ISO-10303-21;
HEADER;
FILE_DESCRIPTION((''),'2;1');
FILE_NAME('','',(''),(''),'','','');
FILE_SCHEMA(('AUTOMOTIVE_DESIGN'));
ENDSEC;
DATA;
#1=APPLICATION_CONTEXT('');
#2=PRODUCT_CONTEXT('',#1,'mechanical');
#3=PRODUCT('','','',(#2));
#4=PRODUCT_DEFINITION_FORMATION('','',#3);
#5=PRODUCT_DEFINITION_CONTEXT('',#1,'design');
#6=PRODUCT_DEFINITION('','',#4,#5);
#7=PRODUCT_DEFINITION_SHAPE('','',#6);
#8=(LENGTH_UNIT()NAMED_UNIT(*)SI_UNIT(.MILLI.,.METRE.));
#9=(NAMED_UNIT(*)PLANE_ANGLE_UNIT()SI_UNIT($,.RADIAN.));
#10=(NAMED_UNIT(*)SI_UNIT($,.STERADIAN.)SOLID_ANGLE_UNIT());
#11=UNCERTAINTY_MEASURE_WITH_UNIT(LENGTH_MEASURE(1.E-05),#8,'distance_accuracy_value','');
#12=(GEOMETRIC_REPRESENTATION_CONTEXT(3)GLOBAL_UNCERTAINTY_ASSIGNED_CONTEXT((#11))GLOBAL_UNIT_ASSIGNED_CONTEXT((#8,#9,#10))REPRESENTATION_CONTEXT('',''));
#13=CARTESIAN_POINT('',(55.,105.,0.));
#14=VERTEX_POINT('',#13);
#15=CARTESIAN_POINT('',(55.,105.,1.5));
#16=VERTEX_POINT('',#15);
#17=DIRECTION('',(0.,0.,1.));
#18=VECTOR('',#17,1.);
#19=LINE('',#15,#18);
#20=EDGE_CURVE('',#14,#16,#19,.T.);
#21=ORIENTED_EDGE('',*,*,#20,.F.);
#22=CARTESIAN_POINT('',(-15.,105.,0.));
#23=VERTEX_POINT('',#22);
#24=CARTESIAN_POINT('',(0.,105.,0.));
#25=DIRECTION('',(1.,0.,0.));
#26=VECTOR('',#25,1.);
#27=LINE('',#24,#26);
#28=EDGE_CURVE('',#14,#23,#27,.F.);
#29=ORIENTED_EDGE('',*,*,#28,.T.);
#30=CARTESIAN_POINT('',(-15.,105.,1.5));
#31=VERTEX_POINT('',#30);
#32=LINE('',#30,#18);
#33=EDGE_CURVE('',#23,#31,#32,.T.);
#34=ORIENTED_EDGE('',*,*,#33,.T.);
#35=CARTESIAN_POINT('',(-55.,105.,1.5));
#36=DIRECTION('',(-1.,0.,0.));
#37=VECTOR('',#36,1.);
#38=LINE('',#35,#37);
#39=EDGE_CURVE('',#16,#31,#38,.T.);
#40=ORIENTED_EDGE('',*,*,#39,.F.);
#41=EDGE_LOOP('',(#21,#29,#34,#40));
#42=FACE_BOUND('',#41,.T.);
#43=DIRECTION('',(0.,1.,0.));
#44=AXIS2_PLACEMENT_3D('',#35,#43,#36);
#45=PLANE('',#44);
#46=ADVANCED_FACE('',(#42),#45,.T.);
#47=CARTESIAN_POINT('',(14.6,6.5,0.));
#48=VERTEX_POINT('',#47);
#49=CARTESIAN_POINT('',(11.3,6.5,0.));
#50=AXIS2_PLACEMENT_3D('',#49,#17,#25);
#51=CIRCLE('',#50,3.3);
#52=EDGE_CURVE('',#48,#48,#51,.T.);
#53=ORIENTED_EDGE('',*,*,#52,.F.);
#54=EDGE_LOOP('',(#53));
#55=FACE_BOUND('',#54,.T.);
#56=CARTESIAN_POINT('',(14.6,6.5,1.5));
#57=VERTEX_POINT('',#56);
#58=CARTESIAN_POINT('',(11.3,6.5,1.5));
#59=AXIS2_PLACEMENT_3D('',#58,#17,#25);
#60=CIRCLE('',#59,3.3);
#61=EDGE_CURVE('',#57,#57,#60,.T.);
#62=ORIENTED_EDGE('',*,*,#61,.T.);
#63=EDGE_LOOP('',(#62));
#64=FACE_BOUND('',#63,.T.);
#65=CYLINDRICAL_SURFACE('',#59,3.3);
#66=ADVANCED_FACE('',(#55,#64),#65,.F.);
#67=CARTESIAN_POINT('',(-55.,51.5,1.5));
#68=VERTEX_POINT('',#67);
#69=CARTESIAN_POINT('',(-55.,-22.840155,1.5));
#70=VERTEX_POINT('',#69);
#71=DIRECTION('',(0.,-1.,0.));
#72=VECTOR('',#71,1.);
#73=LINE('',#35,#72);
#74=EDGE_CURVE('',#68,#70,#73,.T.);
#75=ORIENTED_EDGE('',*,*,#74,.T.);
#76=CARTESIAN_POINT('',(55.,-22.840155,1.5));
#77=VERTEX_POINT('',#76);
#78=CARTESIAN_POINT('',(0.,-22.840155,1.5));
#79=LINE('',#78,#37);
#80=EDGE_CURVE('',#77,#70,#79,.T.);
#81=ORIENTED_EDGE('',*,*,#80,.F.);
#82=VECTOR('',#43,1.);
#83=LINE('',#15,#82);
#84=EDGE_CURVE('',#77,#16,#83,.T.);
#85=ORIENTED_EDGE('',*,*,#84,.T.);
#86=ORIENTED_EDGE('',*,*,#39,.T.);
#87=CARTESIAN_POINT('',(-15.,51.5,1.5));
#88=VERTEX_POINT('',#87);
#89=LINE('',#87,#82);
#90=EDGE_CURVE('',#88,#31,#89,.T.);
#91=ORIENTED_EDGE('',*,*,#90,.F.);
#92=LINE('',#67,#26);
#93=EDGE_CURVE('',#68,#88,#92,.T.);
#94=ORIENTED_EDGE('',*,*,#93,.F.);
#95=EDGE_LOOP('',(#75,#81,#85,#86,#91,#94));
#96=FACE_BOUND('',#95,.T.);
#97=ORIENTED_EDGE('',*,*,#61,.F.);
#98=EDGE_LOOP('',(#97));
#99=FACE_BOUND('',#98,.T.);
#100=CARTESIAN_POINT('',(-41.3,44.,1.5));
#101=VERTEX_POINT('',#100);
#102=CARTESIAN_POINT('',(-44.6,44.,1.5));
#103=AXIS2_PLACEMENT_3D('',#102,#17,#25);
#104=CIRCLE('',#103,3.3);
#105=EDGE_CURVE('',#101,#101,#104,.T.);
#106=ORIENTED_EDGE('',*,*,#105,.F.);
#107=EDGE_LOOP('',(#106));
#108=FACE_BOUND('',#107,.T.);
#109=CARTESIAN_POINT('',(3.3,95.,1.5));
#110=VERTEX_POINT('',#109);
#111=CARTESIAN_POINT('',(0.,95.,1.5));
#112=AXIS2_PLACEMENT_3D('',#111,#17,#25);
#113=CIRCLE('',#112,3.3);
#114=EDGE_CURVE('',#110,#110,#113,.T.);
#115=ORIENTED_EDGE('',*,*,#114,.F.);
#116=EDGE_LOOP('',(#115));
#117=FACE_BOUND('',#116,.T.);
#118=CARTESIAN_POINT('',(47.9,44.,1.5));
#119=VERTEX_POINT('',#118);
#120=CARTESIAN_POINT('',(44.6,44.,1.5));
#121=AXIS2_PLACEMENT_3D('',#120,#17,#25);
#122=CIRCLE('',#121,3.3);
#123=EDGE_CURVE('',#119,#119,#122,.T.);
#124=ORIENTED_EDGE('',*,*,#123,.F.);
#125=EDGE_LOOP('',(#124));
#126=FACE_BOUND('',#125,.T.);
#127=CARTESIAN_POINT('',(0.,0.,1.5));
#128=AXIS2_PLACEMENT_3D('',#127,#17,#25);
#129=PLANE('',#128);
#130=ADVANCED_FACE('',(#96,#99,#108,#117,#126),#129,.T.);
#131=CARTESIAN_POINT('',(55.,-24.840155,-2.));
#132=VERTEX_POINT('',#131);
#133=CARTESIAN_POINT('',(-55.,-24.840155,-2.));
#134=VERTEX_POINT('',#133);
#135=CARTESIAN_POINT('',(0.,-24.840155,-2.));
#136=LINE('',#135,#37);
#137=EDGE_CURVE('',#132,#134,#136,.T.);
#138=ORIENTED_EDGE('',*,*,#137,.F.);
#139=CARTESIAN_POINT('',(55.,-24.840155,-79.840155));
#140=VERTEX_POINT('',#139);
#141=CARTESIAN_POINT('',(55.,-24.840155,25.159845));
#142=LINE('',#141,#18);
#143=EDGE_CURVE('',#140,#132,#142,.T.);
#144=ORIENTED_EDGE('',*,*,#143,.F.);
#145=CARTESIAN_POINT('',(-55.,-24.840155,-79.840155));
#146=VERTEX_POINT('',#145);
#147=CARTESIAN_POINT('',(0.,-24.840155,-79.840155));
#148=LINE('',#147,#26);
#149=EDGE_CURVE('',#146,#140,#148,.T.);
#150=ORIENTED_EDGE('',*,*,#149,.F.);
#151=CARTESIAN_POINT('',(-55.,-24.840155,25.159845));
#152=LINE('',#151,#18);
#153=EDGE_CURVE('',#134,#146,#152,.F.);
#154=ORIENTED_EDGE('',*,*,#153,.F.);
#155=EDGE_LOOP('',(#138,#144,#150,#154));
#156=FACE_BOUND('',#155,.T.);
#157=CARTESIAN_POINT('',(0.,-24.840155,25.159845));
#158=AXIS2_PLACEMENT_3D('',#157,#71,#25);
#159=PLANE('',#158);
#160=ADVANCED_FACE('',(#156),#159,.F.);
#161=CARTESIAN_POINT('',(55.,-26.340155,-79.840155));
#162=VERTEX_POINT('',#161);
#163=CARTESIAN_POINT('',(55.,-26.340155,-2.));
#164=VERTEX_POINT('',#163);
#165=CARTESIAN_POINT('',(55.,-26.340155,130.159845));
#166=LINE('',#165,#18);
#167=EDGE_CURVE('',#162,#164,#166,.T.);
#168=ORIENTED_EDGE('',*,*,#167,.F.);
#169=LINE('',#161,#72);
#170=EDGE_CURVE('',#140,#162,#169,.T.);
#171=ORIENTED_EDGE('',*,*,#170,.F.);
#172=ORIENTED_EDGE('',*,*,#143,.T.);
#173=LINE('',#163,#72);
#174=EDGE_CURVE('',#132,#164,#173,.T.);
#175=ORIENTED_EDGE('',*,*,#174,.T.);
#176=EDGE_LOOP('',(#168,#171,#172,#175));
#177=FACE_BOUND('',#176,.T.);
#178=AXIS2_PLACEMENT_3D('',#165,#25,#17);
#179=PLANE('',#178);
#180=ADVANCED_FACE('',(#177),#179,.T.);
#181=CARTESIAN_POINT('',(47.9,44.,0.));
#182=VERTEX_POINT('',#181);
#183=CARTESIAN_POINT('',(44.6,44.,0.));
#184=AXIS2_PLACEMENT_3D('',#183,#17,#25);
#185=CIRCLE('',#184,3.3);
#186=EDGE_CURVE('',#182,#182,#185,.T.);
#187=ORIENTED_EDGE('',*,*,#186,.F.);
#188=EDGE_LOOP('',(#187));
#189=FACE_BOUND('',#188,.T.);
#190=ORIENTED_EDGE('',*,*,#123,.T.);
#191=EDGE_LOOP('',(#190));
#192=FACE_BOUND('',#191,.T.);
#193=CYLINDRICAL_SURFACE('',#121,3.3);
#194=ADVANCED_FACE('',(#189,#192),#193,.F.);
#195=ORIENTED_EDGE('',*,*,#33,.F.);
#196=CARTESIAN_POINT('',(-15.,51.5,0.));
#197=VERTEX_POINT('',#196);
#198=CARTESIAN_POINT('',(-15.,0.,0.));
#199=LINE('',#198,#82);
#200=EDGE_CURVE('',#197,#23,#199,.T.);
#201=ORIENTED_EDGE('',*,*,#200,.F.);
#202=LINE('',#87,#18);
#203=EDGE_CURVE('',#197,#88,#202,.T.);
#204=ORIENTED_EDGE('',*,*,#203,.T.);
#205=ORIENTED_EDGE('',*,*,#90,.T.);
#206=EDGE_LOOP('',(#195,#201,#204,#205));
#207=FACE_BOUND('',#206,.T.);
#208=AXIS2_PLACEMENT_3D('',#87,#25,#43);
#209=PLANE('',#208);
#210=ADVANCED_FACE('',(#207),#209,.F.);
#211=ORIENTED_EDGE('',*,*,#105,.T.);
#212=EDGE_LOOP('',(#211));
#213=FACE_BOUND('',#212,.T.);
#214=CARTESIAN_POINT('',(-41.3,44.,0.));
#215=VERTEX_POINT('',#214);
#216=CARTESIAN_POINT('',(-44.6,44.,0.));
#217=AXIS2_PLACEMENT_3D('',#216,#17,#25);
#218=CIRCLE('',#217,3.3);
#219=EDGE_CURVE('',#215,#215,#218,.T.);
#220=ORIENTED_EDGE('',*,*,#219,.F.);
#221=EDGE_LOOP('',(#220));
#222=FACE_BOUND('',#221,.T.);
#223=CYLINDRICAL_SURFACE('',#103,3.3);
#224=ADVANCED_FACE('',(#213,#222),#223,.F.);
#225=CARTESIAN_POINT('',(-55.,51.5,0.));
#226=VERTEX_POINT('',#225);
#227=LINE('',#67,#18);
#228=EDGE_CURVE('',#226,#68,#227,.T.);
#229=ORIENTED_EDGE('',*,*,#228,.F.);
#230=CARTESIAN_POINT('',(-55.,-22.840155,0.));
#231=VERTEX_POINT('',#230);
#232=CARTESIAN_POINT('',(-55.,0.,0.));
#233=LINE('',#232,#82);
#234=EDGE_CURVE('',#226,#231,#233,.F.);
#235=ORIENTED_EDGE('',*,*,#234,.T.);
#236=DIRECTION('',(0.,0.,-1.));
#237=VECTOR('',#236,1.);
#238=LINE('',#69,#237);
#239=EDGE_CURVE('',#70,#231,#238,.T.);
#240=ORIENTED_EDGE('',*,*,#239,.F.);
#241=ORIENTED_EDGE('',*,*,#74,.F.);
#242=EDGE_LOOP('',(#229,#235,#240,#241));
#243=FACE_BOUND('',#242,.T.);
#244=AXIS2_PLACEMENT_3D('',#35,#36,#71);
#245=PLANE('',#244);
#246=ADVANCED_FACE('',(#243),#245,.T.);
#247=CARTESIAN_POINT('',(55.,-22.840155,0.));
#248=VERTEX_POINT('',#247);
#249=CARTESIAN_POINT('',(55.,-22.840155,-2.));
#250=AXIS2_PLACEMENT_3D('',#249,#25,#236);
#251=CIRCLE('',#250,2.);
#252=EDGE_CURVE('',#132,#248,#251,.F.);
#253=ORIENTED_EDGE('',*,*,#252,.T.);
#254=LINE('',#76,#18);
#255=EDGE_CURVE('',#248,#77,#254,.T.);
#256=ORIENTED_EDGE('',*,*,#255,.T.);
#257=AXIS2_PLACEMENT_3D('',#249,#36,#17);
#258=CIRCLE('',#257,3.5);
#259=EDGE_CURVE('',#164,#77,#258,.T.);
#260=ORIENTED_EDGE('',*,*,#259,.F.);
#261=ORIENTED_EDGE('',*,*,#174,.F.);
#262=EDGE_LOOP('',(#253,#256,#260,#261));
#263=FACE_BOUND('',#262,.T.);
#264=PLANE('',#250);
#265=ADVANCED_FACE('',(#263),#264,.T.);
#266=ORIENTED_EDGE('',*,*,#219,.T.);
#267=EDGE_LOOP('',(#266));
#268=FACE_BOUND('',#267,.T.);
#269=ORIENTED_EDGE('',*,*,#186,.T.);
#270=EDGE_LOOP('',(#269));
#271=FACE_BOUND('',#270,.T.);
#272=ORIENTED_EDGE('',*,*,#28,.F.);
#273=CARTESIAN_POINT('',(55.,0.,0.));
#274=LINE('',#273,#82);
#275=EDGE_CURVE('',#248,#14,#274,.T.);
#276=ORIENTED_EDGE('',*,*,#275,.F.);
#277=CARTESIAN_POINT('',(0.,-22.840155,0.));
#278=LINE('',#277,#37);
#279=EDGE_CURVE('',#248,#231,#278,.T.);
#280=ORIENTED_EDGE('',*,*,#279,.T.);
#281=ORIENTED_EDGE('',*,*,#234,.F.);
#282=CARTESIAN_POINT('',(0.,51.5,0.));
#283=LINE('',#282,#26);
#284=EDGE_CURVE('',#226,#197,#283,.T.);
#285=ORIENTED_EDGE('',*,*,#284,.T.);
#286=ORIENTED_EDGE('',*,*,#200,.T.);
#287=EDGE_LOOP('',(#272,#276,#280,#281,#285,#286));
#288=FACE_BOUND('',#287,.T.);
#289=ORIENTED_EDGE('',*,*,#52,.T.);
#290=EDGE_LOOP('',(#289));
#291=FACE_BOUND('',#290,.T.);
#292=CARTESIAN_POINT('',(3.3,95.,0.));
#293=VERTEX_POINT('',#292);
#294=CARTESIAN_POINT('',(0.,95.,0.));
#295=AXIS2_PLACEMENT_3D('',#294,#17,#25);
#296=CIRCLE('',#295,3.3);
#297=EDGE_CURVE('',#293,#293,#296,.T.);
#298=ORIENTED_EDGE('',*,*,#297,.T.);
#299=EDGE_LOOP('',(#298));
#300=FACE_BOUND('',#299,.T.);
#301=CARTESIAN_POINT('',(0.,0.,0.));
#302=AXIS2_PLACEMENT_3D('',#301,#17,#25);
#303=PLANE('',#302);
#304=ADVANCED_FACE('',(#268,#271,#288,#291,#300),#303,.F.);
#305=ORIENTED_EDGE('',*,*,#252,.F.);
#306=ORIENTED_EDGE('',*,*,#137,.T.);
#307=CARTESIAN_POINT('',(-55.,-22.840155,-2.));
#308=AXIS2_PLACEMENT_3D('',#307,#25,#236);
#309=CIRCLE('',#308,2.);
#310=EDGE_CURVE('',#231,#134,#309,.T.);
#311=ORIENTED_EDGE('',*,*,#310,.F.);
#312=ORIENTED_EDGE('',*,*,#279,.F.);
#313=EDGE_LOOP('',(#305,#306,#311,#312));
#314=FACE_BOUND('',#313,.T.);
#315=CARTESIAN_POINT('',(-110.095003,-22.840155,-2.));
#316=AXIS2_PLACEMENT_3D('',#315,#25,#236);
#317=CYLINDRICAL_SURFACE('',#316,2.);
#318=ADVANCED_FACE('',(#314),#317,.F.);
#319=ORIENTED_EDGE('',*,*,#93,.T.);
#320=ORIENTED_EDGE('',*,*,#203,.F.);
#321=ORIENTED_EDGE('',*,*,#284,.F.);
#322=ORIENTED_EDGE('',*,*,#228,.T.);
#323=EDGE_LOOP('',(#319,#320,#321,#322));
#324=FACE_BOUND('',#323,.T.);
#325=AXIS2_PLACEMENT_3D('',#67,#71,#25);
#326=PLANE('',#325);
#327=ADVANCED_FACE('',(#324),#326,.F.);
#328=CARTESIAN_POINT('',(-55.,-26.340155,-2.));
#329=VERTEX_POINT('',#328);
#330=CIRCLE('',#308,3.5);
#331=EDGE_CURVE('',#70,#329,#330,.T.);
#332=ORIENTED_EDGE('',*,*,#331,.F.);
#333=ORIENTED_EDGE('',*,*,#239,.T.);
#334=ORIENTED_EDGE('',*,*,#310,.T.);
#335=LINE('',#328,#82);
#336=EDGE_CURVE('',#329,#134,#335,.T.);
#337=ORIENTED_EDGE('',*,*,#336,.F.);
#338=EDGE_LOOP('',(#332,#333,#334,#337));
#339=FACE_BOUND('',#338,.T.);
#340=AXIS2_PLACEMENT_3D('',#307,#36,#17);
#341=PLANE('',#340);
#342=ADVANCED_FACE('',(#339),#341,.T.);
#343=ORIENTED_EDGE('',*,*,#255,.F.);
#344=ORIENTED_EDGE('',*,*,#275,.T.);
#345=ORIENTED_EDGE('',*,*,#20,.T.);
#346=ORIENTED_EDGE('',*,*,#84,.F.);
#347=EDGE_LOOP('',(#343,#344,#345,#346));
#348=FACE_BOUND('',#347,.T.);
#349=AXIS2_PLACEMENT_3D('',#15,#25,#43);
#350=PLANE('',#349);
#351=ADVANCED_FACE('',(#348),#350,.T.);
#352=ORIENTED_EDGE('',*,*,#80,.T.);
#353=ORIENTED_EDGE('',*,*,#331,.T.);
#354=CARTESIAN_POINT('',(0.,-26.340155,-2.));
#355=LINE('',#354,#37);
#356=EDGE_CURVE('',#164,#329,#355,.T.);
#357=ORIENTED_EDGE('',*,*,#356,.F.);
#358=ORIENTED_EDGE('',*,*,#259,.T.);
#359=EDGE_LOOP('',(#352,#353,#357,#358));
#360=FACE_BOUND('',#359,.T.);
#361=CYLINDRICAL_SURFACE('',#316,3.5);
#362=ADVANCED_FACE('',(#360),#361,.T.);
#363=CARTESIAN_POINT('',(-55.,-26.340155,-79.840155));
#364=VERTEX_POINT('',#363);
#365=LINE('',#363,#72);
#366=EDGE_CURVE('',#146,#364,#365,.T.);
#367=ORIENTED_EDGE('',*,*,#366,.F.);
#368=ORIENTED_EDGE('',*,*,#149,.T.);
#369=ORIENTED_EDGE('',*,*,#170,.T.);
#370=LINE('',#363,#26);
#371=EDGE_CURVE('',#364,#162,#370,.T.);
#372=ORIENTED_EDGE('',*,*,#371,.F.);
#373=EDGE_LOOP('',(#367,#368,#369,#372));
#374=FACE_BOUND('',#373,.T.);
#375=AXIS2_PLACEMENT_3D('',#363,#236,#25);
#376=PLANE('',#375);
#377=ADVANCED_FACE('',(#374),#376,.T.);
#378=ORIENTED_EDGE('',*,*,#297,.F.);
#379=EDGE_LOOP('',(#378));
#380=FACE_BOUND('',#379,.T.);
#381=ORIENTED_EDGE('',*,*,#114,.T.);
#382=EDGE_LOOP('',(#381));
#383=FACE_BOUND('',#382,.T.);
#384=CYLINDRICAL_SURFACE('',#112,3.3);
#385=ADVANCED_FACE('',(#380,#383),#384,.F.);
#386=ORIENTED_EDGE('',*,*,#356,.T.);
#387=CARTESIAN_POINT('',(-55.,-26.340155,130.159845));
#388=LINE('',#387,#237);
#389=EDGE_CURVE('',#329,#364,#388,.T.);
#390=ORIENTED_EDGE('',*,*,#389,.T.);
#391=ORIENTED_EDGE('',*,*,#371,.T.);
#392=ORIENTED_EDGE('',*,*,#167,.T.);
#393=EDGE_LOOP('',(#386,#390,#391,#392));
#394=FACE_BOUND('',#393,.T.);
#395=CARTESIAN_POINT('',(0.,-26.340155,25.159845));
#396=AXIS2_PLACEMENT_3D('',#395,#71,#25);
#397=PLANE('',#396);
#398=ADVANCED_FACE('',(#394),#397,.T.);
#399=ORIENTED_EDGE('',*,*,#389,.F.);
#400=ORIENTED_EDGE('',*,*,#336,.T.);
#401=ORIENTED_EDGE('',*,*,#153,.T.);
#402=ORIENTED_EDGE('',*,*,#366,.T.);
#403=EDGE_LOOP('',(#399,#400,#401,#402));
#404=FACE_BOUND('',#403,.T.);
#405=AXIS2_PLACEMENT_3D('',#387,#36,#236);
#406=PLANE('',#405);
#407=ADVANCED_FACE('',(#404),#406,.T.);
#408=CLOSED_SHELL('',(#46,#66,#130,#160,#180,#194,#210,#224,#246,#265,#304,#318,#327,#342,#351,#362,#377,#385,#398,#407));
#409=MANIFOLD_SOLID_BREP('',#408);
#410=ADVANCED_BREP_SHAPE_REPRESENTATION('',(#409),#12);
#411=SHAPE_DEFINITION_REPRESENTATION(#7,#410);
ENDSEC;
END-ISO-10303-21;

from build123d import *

# Parameters (mm, degrees)
ESBO_O1_W                   = 110
ESBO_O1_H                   = 210
RESSALTO_EXTRUS_O1_DEPTH    = 1.5
FURO_COM_FOLGA_DE_M62_D     = 6.6
FURO_COM_FOLGA_DE_M62_DEPTH = 10
FURO_COM_FOLGA_DE_M62_TIP   = 1.982840043
ESBO_O4_W                   = 40
ESBO_O4_H                   = 53.5
CORTE_EXTRUS_O1_DEPTH       = 119.542186584
DOBRA_START                 = -55
DOBRA_ESBO_ADA1_DEPTH       = 110
DOBRA_ESBO_ADA1_2_DEPTH     = 110


# Read off the part's stored shape, not the designer's step: Transforma__o de esbo_o2
with BuildPart() as part:
    # Esboço1 → Ressalto-extrusão1 (new body)
    with BuildSketch(Plane.XY):
        Rectangle(ESBO_O1_W, ESBO_O1_H)
    extrude(amount=RESSALTO_EXTRUS_O1_DEPTH)

    # Furo com folga de M62
    with Locations(Plane.XY.offset(1.5)):
        with Locations((0, 95), (-44.6, 44), (44.6, 44), (11.3, 6.5)):
            Hole(FURO_COM_FOLGA_DE_M62_D / 2, depth=FURO_COM_FOLGA_DE_M62_DEPTH)
            with Locations((0, 0, -(FURO_COM_FOLGA_DE_M62_DEPTH + FURO_COM_FOLGA_DE_M62_TIP / 2))):  # 118° drill point
                Cone(0, FURO_COM_FOLGA_DE_M62_D / 2, FURO_COM_FOLGA_DE_M62_TIP, mode=Mode.SUBTRACT)

    # Esboço4 → Corte-extrusão1 (cut, through all)
    with BuildSketch(Plane.XY.offset(1.5)):
        with Locations((-35, 78.25)):
            Rectangle(ESBO_O4_W, ESBO_O4_H)
    extrude(amount=-CORTE_EXTRUS_O1_DEPTH, mode=Mode.SUBTRACT)

    # Dobra esboçada1 outline → Dobra esboçada1 (cut)
    with BuildSketch(Plane.YZ.offset(DOBRA_START)):
        with BuildLine():
            Line((-105, 0), (-25.712436374, 0))
            ThreePointArc((-25.712436374, 0), (-24.460340225, 1.102418411), (-22.840155051, 1.5))
            Line((-22.840155051, 1.5), (-105, 1.5))
            Line((-105, 1.5), (-105, 0))
        make_face()
    extrude(amount=DOBRA_ESBO_ADA1_DEPTH, mode=Mode.SUBTRACT)

    # Dobra esbo_ada1 2 outline → Dobra esbo_ada1 2 (add)
    with BuildSketch(Plane.YZ.offset(DOBRA_START)):
        with BuildLine():
            ThreePointArc((-25.712436374, 0), (-26.179540071, -0.951902827), (-26.340155051, -2))
            Line((-26.340155051, -2), (-26.340155051, -79.840155051))
            Line((-26.340155051, -79.840155051), (-24.840155051, -79.840155051))
            Line((-24.840155051, -79.840155051), (-24.840155051, -2))
            ThreePointArc((-24.840155051, -2), (-24.254368613, -0.585786438), (-22.840155051, 0))
            Line((-22.840155051, 0), (-25.712436374, 0))
        make_face()
    extrude(amount=DOBRA_ESBO_ADA1_2_DEPTH)


solid = part.part
